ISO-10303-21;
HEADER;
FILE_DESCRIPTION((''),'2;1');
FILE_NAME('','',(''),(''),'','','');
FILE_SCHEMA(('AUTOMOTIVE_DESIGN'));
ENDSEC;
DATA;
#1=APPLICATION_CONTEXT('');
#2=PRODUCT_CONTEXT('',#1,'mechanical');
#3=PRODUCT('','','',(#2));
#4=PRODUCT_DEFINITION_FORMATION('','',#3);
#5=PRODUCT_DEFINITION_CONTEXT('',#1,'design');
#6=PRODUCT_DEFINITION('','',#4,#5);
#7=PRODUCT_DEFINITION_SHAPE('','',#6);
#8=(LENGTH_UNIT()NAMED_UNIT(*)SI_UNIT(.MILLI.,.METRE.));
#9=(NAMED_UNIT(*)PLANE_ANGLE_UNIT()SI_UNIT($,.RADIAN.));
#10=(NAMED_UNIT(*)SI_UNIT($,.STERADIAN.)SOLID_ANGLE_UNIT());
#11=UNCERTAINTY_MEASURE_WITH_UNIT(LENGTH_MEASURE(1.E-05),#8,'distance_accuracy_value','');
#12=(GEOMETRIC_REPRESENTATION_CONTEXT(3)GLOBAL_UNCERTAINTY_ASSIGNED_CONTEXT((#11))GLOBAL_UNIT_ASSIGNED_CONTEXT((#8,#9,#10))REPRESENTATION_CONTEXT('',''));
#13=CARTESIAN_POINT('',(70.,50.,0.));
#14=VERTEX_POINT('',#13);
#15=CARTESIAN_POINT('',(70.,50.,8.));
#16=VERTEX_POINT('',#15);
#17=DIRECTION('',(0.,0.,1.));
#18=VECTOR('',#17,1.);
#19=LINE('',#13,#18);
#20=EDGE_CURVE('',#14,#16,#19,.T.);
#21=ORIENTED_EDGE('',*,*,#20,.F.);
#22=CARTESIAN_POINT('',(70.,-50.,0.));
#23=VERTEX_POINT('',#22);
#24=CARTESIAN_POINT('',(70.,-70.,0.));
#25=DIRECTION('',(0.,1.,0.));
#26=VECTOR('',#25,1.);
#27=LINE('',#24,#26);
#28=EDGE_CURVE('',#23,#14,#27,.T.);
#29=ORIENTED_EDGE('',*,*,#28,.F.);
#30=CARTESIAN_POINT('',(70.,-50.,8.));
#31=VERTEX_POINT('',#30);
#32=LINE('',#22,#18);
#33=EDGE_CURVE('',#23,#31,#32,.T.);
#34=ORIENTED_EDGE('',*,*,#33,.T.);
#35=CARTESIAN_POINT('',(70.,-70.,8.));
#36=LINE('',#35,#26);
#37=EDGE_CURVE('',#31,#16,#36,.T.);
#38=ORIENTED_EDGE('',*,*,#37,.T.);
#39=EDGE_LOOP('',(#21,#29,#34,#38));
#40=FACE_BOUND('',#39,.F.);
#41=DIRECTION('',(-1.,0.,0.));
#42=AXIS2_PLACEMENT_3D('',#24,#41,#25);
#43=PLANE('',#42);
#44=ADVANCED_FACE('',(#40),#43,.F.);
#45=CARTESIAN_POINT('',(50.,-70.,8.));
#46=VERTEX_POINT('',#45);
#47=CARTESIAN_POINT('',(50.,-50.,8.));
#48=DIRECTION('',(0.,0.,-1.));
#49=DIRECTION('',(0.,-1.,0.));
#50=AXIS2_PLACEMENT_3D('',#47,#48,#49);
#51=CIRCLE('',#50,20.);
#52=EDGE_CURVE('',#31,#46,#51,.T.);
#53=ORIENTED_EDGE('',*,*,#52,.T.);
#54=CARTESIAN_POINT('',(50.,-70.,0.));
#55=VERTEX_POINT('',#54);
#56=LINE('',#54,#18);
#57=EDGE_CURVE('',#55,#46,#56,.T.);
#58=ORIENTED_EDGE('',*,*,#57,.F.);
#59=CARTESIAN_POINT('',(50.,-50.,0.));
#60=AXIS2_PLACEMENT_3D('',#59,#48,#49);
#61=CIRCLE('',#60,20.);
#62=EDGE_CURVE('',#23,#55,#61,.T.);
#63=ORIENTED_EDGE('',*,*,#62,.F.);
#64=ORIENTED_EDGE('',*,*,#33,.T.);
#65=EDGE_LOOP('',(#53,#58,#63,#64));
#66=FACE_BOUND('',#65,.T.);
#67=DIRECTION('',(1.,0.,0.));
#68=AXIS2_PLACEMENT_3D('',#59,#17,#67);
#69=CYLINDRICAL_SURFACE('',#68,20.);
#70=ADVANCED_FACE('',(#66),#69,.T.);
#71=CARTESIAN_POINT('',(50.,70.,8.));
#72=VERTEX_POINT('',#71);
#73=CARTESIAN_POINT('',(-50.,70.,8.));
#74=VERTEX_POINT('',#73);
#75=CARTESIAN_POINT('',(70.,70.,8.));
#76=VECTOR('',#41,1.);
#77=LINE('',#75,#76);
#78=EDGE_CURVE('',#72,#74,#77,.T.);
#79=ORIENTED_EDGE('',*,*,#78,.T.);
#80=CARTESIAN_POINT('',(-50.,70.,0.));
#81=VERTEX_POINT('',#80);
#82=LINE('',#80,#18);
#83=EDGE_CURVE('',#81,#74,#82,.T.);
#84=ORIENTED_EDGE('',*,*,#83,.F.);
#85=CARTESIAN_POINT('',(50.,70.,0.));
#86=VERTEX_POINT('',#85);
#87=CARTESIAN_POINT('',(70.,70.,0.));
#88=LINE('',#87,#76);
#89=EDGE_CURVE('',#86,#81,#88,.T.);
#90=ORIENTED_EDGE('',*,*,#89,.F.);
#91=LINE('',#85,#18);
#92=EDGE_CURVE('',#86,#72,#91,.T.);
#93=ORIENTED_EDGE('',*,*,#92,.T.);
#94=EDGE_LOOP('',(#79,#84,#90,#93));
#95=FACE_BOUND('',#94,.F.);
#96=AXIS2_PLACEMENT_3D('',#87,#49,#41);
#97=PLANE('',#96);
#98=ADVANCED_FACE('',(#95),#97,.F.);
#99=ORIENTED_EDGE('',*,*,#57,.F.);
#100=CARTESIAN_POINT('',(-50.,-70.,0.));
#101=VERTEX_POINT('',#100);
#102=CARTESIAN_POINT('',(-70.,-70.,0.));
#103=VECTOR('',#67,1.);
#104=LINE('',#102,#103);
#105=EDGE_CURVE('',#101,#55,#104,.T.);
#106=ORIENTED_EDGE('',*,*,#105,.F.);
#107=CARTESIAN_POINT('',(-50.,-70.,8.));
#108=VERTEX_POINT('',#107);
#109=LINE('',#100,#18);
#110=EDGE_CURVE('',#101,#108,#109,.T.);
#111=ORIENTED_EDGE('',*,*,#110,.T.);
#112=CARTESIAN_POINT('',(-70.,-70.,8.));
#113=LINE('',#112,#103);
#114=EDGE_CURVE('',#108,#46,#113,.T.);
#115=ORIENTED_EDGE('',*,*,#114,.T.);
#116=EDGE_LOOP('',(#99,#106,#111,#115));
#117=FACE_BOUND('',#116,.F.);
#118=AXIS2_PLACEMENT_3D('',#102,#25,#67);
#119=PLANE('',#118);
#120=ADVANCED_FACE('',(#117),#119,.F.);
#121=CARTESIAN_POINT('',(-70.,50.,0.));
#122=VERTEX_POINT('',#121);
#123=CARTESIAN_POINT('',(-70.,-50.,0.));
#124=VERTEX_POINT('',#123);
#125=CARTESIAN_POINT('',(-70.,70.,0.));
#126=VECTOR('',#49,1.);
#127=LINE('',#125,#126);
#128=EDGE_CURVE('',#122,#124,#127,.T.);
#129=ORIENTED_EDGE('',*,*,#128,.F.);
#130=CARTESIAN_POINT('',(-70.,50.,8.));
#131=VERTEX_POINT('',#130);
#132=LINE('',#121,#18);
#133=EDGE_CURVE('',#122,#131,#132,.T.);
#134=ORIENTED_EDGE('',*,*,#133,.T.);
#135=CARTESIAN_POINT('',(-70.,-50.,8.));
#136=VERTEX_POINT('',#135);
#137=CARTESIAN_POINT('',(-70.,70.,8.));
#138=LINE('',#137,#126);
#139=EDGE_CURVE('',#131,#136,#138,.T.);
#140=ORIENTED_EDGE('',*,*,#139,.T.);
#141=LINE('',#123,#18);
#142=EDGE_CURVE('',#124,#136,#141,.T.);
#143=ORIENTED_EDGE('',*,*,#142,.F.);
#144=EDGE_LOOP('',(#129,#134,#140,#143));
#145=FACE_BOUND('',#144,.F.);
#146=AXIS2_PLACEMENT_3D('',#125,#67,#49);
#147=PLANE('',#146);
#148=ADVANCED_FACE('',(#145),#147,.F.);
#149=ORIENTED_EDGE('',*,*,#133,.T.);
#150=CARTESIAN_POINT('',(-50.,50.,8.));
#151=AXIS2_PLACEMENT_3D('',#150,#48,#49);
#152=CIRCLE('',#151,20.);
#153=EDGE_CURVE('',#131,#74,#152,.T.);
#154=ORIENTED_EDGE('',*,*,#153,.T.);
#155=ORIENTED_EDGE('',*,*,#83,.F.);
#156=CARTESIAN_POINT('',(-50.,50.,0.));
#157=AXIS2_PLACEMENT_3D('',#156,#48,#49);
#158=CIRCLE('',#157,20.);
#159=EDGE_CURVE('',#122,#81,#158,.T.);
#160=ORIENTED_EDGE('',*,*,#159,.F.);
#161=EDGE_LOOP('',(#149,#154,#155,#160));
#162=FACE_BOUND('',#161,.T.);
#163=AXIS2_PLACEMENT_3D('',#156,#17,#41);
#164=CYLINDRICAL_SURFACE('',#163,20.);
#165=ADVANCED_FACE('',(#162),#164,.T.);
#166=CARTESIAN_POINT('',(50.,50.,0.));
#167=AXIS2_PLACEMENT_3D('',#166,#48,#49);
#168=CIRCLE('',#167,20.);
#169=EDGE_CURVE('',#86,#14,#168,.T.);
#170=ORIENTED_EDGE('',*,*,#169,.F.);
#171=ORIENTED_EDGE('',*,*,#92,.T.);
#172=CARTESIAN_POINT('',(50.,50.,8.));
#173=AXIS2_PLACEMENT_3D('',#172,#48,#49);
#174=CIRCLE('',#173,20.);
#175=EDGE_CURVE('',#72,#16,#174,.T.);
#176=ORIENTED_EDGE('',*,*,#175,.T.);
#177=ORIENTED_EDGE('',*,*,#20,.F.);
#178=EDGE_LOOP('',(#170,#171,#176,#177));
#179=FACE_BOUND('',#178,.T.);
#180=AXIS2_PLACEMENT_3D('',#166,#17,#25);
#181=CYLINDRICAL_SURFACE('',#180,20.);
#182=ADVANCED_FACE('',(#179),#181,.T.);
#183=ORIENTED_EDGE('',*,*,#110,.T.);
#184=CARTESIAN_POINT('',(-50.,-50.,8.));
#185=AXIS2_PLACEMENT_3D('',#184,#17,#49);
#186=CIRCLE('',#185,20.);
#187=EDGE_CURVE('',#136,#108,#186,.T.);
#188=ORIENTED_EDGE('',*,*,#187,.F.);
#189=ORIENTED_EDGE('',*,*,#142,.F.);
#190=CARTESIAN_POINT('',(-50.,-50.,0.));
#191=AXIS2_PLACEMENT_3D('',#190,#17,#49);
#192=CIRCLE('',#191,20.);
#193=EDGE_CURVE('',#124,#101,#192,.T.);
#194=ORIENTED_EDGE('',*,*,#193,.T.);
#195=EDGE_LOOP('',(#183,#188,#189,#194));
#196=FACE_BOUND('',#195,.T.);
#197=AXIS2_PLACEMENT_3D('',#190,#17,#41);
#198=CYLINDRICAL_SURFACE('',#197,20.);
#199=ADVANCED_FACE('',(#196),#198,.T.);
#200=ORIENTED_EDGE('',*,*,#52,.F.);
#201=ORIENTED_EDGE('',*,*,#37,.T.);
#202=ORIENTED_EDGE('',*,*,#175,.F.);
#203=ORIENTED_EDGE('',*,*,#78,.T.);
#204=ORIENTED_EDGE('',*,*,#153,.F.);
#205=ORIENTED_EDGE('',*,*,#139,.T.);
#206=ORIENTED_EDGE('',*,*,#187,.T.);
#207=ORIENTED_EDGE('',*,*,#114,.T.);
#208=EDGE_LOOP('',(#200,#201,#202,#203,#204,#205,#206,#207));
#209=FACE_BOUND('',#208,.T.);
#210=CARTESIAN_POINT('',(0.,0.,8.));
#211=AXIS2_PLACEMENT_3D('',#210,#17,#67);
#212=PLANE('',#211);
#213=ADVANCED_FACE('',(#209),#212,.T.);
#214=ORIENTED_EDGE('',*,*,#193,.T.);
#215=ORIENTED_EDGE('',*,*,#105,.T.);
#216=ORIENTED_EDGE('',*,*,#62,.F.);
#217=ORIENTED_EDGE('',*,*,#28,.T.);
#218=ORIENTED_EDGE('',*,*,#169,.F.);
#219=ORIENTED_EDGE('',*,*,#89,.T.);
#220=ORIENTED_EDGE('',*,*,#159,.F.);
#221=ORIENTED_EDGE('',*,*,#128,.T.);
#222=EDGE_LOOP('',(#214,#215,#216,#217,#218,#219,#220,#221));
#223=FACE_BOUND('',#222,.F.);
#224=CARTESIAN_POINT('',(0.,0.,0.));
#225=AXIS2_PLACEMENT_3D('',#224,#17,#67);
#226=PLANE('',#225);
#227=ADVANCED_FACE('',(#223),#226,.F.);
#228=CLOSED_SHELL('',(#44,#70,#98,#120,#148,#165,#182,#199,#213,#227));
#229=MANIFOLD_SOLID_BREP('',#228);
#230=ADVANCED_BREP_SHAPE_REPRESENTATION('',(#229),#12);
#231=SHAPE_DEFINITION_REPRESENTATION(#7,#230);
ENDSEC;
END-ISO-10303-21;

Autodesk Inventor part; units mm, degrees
ref_plane "YZ Plane" through (0, 0, 0) normal (1, 0, 0) x (0, 1, 0)
ref_plane "XZ Plane" through (0, 0, 0) normal (0, 1, 0) x (-1, 0, 0)
ref_plane "XY Plane" through (0, 0, 0) normal (0, 0, 1) x (1, 0, 0)
sketch "Sketch1" plane through (0, 0, 0) normal (0, 0, 1) x (1, 0, 0)
  line L0 (-70, -70) -> (70, -70)
  line L1 (70, -70) -> (70, 70)
  line L2 (70, 70) -> (-70, 70)
  line L3 (-70, 70) -> (-70, -70)
  line L4 (-70, -70) -> (70, 70) construction
  line L5 (70, -70) -> (-70, 70) construction
  point P0 (0, 0)
  dimension "d0" = 140
  dimension "d1" = 140
extrude "Plate1" add sketch "Sketch1" along normal blind 8
fillet "Corner Round1" radius 20 4 edges at (70, -70, 4) (-70, -70, 4) (-70, 70, 4) (70, 70, 4)
equation "\"d0\" = d1"
equation "\"d2\" = Thickness"
equation "\"BendReliefWidth\" = Thickness"
equation "\"BendReliefDepth\" = 0.5 * Thickness"
equation "\"CornerReliefSize\" = 4 * Thickness"
equation "\"MinimumRemnant\" = 2 * Thickness"
equation "\"TransitionRadius\" = BendRadius"
equation "\"JacobiRadiusSize\" = BendRadius"
equation "\"GapSize\" = Thickness"
equation "\"Thickness\" = 8"
equation "\"BendRadius\" = 5"
properties part number "APN 1782 leg plate for filter" material "Steel"
